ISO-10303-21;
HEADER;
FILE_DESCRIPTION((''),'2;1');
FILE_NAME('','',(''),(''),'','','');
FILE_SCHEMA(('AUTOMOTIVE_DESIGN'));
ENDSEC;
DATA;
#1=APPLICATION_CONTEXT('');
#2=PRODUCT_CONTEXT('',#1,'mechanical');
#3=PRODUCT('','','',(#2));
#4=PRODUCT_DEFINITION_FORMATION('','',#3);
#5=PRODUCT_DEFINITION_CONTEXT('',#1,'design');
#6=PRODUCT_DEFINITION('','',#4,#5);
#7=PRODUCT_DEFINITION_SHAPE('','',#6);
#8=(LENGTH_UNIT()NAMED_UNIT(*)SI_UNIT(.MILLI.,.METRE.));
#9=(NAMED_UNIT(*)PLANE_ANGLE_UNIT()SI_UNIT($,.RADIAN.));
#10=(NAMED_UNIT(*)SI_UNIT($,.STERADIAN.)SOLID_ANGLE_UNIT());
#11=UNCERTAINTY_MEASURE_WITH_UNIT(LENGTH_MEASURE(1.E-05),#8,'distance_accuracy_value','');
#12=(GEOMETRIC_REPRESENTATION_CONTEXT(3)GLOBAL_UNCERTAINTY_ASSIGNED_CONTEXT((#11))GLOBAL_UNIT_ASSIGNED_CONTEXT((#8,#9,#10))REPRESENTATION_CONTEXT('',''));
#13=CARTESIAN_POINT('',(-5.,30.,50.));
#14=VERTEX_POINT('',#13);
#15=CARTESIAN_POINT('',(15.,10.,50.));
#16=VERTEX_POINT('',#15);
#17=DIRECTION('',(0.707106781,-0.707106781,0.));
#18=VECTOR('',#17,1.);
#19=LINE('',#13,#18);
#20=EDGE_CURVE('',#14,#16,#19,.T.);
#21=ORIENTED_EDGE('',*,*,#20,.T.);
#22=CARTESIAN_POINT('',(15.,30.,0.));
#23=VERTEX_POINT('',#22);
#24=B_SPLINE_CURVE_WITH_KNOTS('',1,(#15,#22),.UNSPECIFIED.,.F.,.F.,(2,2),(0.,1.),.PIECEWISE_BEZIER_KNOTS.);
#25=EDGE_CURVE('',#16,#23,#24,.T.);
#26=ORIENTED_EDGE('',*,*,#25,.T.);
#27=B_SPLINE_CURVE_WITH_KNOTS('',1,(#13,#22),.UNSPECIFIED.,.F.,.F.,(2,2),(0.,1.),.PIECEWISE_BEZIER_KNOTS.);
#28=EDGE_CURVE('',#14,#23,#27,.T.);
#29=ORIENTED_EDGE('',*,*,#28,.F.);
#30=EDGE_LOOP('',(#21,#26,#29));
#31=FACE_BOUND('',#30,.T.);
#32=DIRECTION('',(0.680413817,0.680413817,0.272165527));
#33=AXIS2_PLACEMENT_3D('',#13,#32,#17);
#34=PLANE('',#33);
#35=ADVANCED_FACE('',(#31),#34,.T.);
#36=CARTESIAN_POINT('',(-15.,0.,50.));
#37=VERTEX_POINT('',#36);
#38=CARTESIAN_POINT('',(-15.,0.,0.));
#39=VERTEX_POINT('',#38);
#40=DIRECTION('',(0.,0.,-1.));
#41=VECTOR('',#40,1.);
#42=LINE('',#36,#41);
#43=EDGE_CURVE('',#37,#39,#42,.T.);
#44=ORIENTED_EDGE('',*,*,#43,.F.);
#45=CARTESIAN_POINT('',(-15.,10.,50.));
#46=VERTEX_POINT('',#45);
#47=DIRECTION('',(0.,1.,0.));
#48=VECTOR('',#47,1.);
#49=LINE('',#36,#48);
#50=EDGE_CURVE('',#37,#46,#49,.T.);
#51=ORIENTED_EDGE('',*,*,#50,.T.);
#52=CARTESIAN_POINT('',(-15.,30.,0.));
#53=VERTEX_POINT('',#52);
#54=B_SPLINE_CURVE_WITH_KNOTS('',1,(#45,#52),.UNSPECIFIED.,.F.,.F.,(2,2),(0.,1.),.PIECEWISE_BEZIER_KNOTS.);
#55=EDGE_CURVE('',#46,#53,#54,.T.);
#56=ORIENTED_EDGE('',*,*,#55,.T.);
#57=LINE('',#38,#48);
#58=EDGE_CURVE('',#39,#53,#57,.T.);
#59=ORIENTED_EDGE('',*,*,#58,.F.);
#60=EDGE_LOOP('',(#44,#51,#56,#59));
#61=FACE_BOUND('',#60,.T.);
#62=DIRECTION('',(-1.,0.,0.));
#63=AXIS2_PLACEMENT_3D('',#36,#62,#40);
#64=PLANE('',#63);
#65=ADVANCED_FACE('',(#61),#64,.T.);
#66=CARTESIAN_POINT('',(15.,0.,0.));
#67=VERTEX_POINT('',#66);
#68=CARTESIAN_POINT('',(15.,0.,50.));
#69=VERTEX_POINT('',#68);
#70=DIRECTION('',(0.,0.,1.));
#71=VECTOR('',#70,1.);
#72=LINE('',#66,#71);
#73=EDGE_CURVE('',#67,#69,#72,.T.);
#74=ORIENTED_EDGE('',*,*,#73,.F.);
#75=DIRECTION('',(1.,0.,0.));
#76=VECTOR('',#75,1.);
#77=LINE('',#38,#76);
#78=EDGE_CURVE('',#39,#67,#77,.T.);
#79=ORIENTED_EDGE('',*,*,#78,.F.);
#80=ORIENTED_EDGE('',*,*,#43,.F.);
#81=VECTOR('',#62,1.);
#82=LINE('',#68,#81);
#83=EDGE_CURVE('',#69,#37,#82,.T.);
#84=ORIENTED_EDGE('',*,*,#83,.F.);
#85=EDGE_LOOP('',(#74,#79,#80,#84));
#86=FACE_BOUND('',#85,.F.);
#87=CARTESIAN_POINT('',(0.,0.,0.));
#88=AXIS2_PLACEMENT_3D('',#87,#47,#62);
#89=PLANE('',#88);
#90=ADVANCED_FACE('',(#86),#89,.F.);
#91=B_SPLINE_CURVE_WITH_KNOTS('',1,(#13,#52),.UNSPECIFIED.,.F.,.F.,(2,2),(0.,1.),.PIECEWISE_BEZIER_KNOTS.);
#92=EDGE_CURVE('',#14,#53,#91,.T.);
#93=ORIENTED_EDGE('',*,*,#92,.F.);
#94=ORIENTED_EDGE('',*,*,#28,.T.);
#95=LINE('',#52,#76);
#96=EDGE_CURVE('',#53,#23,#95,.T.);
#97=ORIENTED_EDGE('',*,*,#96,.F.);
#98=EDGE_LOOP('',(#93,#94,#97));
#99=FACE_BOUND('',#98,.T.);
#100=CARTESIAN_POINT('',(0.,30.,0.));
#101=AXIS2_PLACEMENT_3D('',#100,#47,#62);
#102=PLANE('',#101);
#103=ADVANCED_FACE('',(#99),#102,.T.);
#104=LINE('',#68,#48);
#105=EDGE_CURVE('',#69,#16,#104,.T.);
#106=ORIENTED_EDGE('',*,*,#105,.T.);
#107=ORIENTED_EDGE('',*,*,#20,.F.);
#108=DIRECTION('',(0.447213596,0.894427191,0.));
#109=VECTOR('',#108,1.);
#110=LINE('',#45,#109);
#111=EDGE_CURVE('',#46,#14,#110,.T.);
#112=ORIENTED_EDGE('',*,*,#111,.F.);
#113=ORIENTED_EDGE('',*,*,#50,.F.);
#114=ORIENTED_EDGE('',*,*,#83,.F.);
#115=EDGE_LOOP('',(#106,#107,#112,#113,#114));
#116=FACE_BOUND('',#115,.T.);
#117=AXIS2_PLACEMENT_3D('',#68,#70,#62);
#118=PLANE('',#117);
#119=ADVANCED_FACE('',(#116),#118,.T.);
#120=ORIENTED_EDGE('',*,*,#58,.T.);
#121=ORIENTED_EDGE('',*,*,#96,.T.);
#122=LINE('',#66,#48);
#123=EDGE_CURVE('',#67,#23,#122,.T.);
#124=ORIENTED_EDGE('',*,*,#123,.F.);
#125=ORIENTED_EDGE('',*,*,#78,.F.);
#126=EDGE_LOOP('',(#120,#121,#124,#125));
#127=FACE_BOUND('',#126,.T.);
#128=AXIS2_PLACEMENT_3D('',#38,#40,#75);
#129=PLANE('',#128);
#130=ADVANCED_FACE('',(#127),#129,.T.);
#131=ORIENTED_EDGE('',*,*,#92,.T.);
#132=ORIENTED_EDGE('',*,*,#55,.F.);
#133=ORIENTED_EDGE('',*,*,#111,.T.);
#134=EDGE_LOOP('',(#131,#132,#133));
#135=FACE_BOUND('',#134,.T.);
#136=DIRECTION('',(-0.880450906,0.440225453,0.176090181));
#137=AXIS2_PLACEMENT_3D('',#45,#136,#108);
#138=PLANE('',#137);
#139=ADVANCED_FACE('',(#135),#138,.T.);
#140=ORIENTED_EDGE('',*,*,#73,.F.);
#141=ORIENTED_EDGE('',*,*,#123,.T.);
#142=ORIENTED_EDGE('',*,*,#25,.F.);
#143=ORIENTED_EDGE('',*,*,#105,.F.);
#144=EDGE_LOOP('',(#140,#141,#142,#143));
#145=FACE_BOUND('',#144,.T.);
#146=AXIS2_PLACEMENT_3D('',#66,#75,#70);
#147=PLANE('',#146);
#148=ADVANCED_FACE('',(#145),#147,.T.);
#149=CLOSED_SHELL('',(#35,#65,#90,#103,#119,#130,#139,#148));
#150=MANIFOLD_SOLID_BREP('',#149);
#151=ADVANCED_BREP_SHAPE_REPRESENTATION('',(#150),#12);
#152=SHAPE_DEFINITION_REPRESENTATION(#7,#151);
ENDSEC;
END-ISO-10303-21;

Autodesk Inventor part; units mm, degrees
ref_plane "YZ Plane" through (0, 0, 0) normal (1, 0, 0) x (0, 1, 0)
ref_plane "XZ Plane" through (0, 0, 0) normal (0, 1, 0) x (-1, 0, 0)
ref_plane "XY Plane" through (0, 0, 0) normal (0, 0, 1) x (1, 0, 0)
sketch "草圖1" plane through (0, 0, 0) normal (0, 1, 0) x (-1, 0, 0)
  line L0 (15, 0) -> (-15, 0)
  line L1 (-15, 0) -> (-15, 50)
  line L2 (-15, 50) -> (15, 50)
  line L3 (15, 50) -> (15, 0)
  point P0 (0, 0)
  point P1 (0, 0)
  dimension "d0" = 30
  dimension "d1" = 50
extrude "擠出1" add sketch "草圖1" along normal blind 30
sketch "草圖2" plane through (-15, 0, 50) normal (0, 0, 1) x (1, 0, 0)
  line L0 (0, 0) -> (0, 30) construction
  line L1 (0, 30) -> (30, 30) construction
  line L2 (30, 30) -> (30, 0) construction
  line L3 (30, 0) -> (0, 0) construction
  line L4 (0, 0) -> (0, 30) construction
  line L5 (0, 10) -> (10, 30)
  line L6 (0, 30) -> (30, 30) construction
  line L7 (10, 30) -> (0, 30)
  line L8 (0, 30) -> (0, 10)
  point P0 (15, 0)
  dimension "d4" = 10
  dimension "d5" = 20
loft "斷面混成1" cut profiles "草圖2" section 2 point at (-15, 30, 0)
sketch "草圖3" plane through (-15, 0, 50) normal (0, 0, 1) x (1, 0, 0)
  line L0 (0, 10) -> (10, 30) construction
  line L1 (10, 30) -> (30, 30) construction
  line L2 (30, 30) -> (30, 0) construction
  line L3 (30, 0) -> (0, 0) construction
  line L4 (0, 0) -> (0, 10) construction
  line L5 (10, 30) -> (30, 10)
  line L6 (30, 30) -> (0, 30) construction
  line L7 (30, 10) -> (30, 30)
  line L8 (30, 30) -> (10, 30)
  point P0 (15, 0)
  dimension "d10" = 20
loft "斷面混成2" cut profiles "草圖3" section 2 point at (15, 30, 0)
properties part number "40" material "鋼、碳鋼"
